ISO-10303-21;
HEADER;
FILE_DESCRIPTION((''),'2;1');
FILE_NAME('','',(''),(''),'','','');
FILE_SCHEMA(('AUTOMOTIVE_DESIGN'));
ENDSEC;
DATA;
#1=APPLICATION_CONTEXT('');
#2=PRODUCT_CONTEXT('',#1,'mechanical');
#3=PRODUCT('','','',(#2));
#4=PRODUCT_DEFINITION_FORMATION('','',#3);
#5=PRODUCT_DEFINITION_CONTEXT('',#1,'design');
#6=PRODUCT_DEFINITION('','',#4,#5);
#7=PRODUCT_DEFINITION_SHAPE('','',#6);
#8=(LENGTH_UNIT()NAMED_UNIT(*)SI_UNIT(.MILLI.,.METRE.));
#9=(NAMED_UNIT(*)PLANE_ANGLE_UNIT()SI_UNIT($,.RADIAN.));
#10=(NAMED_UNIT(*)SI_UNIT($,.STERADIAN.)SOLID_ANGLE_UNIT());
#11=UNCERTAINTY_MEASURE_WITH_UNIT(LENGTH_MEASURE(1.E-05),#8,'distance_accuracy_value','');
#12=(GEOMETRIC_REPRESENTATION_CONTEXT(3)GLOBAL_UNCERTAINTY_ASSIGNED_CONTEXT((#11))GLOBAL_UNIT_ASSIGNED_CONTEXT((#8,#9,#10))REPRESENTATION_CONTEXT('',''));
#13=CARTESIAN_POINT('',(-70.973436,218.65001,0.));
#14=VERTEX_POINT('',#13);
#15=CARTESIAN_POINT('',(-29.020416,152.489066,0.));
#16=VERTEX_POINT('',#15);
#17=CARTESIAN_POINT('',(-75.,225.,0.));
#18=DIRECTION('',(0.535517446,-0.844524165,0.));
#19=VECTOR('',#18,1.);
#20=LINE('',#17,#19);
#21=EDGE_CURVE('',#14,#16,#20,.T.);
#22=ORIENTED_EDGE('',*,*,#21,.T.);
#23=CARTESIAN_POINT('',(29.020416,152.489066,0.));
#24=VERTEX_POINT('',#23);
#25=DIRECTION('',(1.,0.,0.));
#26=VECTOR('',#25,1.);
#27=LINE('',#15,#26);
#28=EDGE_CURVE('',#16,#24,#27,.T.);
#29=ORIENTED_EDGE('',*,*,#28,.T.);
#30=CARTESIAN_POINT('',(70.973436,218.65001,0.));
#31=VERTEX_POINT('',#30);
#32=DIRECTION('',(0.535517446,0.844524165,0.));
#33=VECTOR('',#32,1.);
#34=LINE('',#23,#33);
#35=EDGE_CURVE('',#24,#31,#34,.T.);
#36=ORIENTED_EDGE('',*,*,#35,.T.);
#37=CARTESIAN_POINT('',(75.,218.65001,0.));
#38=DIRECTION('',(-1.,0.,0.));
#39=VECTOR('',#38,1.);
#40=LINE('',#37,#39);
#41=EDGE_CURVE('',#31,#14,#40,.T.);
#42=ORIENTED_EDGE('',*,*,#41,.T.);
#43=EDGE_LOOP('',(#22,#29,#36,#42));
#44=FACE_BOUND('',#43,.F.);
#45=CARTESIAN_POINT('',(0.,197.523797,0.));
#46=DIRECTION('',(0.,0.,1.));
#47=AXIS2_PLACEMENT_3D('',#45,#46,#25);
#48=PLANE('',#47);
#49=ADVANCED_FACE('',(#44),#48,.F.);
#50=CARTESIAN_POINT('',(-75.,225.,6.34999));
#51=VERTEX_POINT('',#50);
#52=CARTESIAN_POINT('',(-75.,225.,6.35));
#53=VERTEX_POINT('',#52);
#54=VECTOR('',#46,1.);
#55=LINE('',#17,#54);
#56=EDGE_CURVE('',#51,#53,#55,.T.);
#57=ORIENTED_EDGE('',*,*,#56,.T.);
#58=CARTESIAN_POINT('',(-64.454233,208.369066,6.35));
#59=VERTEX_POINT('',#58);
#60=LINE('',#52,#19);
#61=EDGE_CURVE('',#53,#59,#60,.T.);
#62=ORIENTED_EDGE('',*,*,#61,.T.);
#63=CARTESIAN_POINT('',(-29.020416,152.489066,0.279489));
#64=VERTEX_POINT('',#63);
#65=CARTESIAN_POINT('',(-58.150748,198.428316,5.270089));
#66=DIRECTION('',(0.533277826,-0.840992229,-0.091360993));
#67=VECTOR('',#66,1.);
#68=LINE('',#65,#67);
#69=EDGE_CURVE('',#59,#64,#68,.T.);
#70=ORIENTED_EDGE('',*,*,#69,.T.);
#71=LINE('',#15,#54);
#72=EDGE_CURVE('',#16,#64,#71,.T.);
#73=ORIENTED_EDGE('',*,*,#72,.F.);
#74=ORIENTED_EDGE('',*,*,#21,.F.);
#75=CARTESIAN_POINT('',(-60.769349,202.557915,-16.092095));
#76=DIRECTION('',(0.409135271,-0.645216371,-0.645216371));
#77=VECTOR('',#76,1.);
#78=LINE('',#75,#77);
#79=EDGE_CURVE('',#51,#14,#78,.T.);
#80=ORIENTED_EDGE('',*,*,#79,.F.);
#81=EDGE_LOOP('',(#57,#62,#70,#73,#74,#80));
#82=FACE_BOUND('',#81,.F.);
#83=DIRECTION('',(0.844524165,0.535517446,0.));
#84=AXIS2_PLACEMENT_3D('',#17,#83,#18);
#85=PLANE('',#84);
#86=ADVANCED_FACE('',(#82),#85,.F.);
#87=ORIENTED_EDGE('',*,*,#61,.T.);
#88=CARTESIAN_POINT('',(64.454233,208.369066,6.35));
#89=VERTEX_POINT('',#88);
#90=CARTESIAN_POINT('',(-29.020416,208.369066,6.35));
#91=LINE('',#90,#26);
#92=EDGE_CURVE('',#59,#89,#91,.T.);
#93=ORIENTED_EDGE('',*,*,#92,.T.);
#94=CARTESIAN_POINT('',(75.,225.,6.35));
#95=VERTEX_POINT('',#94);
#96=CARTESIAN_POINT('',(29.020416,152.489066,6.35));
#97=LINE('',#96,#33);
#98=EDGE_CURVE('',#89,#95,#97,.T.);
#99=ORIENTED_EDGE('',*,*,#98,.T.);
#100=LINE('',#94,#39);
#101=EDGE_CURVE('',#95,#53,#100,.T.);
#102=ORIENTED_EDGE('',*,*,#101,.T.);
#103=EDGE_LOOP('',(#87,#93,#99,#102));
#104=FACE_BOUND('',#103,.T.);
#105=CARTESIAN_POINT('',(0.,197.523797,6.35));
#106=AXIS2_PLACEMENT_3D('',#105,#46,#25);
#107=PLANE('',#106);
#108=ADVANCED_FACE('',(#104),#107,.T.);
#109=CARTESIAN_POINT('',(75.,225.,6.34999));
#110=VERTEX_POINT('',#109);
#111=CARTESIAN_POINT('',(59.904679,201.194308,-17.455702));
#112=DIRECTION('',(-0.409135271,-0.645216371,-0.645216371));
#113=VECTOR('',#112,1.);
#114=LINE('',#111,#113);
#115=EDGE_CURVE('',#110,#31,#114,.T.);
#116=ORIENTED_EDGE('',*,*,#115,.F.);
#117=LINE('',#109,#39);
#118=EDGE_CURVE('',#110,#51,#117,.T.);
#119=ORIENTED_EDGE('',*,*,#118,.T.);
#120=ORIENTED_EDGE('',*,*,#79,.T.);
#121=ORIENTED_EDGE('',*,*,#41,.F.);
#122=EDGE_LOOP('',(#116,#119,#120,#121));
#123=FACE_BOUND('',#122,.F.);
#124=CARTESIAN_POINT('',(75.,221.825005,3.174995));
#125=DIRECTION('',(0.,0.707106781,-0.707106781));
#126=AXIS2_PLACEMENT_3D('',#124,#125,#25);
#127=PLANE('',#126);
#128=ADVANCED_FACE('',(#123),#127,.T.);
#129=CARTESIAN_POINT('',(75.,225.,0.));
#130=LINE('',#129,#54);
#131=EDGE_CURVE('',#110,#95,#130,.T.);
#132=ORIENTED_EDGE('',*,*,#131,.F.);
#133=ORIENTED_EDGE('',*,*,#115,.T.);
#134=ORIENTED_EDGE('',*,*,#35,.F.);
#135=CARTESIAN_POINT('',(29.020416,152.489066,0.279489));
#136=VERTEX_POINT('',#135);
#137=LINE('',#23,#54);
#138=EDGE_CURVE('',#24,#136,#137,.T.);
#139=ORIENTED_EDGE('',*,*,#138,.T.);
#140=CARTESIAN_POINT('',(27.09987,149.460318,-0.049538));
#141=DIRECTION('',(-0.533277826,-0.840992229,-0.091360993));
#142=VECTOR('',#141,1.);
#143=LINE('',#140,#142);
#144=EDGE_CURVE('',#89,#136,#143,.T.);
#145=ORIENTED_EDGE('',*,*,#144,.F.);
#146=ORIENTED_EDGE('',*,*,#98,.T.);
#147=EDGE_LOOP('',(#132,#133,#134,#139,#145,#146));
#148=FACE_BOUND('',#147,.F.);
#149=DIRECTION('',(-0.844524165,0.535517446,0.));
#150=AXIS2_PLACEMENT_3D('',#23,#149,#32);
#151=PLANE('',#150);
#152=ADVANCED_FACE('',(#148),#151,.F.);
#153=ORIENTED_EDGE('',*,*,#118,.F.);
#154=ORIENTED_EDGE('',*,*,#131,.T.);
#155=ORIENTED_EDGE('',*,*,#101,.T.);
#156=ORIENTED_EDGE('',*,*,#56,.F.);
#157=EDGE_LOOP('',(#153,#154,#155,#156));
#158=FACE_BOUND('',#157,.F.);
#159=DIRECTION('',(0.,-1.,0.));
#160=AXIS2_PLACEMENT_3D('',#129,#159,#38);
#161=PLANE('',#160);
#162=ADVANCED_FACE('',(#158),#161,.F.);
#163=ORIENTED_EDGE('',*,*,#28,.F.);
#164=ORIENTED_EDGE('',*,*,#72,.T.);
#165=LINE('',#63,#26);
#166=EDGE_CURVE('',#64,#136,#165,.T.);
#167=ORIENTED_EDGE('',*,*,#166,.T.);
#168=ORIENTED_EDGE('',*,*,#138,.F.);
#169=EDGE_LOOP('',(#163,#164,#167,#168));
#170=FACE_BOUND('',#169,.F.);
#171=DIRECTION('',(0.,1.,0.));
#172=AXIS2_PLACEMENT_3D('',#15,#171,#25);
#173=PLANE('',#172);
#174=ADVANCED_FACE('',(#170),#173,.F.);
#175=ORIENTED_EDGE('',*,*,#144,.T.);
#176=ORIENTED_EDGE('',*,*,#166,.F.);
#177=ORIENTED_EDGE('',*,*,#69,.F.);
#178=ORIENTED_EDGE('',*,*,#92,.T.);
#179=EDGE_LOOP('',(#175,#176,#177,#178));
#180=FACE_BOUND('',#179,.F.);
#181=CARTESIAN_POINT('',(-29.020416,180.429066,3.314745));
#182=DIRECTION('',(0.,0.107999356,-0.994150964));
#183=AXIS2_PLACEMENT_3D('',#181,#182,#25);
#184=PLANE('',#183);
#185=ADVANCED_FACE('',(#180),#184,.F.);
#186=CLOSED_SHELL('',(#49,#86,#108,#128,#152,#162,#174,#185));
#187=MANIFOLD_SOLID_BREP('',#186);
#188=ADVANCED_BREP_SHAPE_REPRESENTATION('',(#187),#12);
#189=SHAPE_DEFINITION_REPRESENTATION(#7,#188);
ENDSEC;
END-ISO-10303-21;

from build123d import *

# Parameters (mm, degrees)
F1_DEPTH = 6.35
F2_SIZE  = 6.34999
F3_SIZE2 = 6.0705106322
F3_SIZE  = 55.88


# Not quite as in the source:
# - a fillet or chamfer is up to 0.001 mm smaller than in the source, because OpenCascade refuses the exact size


with BuildPart() as f1:
    # F0 (on Top) → F1 (new body)
    with BuildSketch(Plane.XY):
        Polygon((75, 225), (-75, 225), (-29.020415619, 152.489066124), (29.020415619, 152.489066124), align=None)
    extrude(amount=F1_DEPTH)

    # F2 (size 6.35 in the source; OpenCascade refuses exactly that, so slightly less here)
    f2_edges = [f1.edges().sort_by_distance(p)[0] for p in [
        (0, 225, 0),
    ]]
    chamfer(f2_edges, length=F2_SIZE)

    # F3
    f3_edges = [f1.edges().sort_by_distance(p)[0] for p in [
        (0, 152.489066, 6.35),
    ]]
    f3_side = f1.faces().sort_by_distance((0, 194.086469, 6.35))[0]
    chamfer(f3_edges, length=F3_SIZE, length2=F3_SIZE2, reference=f3_side)


solid = f1.part
